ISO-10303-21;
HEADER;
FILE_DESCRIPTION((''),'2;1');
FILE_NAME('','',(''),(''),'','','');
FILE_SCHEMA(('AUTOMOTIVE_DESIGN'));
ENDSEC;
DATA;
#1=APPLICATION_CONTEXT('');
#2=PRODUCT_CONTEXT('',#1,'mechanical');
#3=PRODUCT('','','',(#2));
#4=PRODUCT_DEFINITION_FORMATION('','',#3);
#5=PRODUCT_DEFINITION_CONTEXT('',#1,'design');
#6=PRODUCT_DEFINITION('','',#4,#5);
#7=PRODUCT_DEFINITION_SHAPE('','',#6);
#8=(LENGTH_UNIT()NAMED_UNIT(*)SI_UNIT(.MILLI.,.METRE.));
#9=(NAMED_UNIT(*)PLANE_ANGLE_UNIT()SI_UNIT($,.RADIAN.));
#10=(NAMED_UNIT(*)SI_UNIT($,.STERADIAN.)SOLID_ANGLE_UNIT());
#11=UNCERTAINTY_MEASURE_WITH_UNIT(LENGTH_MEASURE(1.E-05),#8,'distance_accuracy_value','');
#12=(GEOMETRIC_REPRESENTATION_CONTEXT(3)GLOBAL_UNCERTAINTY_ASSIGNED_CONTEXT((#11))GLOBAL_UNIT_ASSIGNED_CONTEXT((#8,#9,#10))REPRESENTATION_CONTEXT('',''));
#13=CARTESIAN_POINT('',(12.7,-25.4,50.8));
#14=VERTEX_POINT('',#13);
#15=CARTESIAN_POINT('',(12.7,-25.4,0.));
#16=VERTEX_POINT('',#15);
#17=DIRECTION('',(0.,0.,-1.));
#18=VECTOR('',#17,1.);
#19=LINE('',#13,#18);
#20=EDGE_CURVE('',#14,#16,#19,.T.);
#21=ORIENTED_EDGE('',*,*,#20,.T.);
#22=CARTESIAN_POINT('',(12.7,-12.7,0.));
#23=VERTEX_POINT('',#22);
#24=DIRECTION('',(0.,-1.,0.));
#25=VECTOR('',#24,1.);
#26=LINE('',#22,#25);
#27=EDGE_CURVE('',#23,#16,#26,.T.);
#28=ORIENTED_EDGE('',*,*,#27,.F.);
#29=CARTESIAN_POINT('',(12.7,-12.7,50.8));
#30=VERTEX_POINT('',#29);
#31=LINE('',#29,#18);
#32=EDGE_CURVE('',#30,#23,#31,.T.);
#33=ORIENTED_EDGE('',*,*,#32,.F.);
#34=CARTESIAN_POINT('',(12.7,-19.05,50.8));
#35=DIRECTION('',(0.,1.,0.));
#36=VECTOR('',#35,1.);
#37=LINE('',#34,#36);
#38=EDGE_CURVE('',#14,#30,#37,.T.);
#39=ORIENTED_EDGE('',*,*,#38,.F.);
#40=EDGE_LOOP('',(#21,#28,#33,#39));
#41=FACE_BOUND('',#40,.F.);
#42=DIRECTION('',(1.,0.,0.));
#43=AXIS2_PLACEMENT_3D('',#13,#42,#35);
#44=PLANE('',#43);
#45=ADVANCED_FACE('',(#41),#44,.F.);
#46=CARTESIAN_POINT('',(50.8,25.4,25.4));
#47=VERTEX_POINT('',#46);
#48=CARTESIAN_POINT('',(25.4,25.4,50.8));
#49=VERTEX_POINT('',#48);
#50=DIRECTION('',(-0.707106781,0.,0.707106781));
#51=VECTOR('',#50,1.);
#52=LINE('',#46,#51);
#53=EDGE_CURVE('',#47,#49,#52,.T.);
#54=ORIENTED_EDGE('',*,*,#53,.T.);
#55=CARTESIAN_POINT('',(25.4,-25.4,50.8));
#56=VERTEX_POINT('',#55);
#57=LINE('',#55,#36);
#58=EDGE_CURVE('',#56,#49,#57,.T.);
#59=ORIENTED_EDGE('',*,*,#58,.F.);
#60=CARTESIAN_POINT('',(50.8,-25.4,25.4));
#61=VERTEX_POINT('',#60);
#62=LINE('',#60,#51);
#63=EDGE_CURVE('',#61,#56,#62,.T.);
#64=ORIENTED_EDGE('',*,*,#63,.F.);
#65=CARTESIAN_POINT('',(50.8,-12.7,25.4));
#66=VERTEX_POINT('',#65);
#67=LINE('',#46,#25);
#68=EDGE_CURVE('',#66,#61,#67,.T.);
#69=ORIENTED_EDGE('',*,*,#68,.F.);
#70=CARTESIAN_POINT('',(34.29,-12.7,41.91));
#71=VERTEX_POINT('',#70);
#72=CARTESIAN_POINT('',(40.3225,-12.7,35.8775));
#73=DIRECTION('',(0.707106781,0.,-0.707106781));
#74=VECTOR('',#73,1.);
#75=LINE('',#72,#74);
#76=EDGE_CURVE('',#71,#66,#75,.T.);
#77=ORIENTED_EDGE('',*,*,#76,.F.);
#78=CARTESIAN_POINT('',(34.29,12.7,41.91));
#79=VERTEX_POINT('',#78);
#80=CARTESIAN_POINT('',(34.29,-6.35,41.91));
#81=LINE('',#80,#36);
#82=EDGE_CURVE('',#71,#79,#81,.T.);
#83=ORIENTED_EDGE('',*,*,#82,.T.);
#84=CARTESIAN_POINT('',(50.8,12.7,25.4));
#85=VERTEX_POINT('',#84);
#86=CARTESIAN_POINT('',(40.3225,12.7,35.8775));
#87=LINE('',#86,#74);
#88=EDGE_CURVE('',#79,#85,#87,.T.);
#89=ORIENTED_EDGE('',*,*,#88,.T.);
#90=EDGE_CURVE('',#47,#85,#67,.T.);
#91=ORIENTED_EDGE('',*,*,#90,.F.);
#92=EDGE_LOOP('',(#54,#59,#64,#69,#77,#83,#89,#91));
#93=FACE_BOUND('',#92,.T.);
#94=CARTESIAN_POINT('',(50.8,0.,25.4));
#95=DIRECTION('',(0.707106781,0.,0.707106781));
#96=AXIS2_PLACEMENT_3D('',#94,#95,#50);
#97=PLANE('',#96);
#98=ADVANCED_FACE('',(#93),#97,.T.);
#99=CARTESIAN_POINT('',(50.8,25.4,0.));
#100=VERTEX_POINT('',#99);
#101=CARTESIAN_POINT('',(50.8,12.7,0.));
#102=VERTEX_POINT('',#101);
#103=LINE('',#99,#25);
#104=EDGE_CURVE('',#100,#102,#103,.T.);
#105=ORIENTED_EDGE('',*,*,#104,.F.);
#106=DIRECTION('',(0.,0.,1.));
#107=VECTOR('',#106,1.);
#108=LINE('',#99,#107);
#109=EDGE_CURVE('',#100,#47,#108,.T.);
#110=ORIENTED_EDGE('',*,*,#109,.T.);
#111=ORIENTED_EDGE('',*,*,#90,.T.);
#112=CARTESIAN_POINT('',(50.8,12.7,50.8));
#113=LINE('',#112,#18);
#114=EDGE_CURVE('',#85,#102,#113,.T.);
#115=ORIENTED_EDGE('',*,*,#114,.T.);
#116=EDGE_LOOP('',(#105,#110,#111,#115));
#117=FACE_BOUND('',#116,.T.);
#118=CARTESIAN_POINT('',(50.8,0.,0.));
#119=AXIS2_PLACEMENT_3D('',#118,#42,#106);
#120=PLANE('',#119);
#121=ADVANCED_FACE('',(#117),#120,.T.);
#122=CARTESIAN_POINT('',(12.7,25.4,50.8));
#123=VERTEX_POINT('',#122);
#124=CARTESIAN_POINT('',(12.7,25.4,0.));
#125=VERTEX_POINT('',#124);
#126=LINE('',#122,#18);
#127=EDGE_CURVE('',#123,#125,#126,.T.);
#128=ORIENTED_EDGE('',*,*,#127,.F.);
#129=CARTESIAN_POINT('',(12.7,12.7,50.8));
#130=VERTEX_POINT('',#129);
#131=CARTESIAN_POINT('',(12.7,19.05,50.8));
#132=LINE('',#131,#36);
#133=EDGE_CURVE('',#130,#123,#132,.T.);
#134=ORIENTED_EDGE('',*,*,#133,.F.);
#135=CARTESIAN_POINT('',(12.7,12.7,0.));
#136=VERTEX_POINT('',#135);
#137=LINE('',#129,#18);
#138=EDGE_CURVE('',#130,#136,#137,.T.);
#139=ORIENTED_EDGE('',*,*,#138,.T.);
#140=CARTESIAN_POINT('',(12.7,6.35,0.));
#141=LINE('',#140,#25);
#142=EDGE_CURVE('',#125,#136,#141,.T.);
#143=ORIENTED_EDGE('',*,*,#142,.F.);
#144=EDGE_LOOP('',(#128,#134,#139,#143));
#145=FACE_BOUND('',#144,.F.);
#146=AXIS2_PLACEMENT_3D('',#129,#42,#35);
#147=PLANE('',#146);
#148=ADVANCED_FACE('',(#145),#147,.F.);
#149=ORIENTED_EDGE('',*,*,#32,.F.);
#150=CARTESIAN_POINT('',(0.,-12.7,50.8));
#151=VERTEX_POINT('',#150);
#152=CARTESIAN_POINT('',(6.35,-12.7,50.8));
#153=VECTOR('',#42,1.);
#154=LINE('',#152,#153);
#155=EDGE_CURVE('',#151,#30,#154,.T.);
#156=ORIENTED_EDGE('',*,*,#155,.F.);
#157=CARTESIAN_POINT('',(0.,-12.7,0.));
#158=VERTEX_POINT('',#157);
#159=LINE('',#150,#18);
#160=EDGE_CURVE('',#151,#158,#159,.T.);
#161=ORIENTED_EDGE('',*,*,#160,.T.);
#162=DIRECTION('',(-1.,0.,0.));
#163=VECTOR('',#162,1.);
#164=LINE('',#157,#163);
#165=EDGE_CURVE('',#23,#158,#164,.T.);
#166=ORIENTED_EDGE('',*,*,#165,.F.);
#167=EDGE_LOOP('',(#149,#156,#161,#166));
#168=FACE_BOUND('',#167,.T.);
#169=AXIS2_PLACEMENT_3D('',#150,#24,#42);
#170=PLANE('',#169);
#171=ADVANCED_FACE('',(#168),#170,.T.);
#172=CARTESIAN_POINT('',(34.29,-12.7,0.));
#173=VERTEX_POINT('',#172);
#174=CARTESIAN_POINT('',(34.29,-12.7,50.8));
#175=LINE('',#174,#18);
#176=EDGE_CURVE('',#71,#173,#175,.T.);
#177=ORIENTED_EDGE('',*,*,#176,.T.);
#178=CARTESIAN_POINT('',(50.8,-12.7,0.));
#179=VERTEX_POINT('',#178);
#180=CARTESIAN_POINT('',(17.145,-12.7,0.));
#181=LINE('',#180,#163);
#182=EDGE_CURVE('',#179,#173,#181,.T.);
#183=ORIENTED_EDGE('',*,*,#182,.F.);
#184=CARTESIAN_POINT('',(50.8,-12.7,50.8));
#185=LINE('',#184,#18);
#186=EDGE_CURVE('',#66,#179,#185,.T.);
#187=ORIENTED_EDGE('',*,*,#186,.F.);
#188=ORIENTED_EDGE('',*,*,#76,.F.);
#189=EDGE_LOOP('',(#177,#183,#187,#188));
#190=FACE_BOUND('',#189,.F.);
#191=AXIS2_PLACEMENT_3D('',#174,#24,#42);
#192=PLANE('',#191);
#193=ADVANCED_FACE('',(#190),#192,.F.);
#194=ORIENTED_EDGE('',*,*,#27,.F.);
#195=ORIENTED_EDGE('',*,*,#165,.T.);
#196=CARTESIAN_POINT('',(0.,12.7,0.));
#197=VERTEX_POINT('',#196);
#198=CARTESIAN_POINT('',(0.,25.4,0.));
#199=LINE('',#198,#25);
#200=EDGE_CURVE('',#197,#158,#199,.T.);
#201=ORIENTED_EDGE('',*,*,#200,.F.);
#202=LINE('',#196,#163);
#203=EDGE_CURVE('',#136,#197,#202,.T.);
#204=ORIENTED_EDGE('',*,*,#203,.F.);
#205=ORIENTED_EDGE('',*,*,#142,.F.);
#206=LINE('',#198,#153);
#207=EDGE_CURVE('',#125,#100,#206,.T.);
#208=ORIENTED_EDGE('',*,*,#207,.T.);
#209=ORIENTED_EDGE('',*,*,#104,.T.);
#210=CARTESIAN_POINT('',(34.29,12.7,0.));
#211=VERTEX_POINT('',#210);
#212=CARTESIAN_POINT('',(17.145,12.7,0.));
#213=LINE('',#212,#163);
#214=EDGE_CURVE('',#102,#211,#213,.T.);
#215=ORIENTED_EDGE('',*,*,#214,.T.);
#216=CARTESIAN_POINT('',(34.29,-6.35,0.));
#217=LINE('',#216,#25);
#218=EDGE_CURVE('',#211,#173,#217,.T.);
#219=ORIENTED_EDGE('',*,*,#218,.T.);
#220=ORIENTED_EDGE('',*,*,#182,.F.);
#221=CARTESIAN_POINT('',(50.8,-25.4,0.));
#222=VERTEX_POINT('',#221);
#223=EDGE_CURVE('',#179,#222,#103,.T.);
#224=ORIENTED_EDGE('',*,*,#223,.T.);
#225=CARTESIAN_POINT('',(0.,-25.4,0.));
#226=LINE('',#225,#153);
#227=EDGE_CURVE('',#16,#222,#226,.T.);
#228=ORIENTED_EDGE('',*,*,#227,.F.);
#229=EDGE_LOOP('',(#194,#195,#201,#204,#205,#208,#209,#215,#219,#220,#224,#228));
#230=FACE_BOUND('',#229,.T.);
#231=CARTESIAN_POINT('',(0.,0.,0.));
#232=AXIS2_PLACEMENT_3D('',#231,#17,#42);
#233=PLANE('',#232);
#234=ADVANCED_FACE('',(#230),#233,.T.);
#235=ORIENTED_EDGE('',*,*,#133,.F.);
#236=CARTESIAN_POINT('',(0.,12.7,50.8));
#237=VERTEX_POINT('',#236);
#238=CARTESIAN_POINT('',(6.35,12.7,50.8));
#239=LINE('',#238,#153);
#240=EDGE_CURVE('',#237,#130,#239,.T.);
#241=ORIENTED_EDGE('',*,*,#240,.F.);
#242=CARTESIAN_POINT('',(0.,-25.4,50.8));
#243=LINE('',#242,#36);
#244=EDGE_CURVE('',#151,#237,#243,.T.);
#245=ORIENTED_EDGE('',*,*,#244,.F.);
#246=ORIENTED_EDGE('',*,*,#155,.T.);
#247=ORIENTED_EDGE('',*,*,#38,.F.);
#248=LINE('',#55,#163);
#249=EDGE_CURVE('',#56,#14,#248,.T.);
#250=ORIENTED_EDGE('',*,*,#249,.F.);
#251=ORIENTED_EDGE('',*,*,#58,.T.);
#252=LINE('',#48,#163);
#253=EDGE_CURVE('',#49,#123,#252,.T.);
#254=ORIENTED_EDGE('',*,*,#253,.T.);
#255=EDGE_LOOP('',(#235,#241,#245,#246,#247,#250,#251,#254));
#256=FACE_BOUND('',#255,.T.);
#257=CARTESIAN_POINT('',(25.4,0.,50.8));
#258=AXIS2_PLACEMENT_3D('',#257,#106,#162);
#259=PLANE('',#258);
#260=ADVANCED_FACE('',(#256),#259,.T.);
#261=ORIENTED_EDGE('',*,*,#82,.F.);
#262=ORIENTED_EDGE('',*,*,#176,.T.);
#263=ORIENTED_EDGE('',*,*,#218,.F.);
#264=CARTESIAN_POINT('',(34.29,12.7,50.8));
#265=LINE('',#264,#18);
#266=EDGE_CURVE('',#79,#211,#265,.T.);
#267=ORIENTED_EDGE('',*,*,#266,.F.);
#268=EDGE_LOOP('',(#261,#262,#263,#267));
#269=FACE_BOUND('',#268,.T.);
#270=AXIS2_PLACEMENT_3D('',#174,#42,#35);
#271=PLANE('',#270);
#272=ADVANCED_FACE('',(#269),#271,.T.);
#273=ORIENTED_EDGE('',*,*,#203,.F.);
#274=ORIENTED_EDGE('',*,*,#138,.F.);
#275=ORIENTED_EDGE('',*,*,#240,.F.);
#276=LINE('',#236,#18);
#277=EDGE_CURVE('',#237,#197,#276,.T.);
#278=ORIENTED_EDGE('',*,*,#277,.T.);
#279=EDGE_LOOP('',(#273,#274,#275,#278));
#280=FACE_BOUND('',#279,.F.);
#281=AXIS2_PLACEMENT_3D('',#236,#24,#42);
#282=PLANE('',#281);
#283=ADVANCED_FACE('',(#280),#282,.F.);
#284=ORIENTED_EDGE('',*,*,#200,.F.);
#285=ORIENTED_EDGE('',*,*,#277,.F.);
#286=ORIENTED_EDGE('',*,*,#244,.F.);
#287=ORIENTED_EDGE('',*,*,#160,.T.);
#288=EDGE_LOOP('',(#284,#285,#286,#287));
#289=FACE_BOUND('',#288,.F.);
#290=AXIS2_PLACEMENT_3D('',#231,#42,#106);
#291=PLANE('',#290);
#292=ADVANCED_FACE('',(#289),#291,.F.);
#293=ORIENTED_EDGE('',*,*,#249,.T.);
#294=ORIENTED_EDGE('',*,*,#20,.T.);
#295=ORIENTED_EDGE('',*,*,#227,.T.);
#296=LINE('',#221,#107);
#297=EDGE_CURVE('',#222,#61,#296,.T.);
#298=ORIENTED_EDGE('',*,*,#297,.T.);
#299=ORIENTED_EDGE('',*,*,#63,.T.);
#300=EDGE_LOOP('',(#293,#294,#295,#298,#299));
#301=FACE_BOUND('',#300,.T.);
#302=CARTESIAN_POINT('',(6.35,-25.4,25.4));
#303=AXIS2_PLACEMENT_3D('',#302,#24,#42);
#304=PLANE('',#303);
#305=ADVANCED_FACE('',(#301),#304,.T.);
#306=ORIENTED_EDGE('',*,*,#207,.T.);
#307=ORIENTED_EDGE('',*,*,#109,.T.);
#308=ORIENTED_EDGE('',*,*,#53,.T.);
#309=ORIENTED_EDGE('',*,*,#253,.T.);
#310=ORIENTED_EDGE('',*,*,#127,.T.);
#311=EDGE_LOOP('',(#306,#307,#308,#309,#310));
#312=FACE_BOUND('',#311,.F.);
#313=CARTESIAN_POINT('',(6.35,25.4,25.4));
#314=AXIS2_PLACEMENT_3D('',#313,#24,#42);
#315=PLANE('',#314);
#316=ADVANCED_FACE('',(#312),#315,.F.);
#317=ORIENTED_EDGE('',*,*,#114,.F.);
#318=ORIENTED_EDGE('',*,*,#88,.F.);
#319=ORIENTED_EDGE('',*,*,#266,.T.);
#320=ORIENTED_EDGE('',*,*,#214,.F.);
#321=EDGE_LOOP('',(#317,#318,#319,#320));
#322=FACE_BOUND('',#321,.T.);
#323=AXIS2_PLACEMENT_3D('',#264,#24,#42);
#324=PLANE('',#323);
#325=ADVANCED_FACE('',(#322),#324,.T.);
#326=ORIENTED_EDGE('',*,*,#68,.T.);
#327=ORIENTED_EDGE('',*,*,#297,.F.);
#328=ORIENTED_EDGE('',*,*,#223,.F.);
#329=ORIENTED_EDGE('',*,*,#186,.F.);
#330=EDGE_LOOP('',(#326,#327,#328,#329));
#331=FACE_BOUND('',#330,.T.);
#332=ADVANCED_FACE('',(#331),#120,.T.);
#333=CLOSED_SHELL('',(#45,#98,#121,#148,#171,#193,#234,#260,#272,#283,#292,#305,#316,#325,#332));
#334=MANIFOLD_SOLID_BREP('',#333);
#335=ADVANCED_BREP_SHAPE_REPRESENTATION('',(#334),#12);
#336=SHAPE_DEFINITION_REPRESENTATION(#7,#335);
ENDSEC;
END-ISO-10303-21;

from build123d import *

# Parameters (mm, degrees)
F0_W     = 12.7
F0_H     = 50.8
F1_DEPTH = 25.4
F2_W     = 12.7
F2_H     = 12.7
F2_W_2   = 16.51
F2_H_2   = 25.4
F3_DEPTH = 50.801


# Not quite as in the source:
# - a feature names something its author has since deleted; it is built from what else it names


with BuildPart() as f1:
    # F0 (on Front) → F1 (new body, symmetric)
    with BuildSketch(Plane.XZ):
        with Locations((6.35, 25.4)):
            Rectangle(F0_W, F0_H)
        Polygon((12.7, 50.8), (12.7, 0), (25.4, 0), (50.8, 0), (50.8, 25.4), (25.4, 50.8), align=None)
    extrude(amount=F1_DEPTH, both=True)

    # F2 (on face) → F3 (cut, through all)
    with BuildSketch(Plane.XY.offset(50.8)):
        with Locations((6.35, -19.05)):
            Rectangle(F2_W, F2_H)
        with Locations((6.35, 19.05)):
            Rectangle(F2_W, F2_H)
        with Locations((42.545, 0)):
            Rectangle(F2_W_2, F2_H_2)
    extrude(amount=-F3_DEPTH, mode=Mode.SUBTRACT)


solid = f1.part
